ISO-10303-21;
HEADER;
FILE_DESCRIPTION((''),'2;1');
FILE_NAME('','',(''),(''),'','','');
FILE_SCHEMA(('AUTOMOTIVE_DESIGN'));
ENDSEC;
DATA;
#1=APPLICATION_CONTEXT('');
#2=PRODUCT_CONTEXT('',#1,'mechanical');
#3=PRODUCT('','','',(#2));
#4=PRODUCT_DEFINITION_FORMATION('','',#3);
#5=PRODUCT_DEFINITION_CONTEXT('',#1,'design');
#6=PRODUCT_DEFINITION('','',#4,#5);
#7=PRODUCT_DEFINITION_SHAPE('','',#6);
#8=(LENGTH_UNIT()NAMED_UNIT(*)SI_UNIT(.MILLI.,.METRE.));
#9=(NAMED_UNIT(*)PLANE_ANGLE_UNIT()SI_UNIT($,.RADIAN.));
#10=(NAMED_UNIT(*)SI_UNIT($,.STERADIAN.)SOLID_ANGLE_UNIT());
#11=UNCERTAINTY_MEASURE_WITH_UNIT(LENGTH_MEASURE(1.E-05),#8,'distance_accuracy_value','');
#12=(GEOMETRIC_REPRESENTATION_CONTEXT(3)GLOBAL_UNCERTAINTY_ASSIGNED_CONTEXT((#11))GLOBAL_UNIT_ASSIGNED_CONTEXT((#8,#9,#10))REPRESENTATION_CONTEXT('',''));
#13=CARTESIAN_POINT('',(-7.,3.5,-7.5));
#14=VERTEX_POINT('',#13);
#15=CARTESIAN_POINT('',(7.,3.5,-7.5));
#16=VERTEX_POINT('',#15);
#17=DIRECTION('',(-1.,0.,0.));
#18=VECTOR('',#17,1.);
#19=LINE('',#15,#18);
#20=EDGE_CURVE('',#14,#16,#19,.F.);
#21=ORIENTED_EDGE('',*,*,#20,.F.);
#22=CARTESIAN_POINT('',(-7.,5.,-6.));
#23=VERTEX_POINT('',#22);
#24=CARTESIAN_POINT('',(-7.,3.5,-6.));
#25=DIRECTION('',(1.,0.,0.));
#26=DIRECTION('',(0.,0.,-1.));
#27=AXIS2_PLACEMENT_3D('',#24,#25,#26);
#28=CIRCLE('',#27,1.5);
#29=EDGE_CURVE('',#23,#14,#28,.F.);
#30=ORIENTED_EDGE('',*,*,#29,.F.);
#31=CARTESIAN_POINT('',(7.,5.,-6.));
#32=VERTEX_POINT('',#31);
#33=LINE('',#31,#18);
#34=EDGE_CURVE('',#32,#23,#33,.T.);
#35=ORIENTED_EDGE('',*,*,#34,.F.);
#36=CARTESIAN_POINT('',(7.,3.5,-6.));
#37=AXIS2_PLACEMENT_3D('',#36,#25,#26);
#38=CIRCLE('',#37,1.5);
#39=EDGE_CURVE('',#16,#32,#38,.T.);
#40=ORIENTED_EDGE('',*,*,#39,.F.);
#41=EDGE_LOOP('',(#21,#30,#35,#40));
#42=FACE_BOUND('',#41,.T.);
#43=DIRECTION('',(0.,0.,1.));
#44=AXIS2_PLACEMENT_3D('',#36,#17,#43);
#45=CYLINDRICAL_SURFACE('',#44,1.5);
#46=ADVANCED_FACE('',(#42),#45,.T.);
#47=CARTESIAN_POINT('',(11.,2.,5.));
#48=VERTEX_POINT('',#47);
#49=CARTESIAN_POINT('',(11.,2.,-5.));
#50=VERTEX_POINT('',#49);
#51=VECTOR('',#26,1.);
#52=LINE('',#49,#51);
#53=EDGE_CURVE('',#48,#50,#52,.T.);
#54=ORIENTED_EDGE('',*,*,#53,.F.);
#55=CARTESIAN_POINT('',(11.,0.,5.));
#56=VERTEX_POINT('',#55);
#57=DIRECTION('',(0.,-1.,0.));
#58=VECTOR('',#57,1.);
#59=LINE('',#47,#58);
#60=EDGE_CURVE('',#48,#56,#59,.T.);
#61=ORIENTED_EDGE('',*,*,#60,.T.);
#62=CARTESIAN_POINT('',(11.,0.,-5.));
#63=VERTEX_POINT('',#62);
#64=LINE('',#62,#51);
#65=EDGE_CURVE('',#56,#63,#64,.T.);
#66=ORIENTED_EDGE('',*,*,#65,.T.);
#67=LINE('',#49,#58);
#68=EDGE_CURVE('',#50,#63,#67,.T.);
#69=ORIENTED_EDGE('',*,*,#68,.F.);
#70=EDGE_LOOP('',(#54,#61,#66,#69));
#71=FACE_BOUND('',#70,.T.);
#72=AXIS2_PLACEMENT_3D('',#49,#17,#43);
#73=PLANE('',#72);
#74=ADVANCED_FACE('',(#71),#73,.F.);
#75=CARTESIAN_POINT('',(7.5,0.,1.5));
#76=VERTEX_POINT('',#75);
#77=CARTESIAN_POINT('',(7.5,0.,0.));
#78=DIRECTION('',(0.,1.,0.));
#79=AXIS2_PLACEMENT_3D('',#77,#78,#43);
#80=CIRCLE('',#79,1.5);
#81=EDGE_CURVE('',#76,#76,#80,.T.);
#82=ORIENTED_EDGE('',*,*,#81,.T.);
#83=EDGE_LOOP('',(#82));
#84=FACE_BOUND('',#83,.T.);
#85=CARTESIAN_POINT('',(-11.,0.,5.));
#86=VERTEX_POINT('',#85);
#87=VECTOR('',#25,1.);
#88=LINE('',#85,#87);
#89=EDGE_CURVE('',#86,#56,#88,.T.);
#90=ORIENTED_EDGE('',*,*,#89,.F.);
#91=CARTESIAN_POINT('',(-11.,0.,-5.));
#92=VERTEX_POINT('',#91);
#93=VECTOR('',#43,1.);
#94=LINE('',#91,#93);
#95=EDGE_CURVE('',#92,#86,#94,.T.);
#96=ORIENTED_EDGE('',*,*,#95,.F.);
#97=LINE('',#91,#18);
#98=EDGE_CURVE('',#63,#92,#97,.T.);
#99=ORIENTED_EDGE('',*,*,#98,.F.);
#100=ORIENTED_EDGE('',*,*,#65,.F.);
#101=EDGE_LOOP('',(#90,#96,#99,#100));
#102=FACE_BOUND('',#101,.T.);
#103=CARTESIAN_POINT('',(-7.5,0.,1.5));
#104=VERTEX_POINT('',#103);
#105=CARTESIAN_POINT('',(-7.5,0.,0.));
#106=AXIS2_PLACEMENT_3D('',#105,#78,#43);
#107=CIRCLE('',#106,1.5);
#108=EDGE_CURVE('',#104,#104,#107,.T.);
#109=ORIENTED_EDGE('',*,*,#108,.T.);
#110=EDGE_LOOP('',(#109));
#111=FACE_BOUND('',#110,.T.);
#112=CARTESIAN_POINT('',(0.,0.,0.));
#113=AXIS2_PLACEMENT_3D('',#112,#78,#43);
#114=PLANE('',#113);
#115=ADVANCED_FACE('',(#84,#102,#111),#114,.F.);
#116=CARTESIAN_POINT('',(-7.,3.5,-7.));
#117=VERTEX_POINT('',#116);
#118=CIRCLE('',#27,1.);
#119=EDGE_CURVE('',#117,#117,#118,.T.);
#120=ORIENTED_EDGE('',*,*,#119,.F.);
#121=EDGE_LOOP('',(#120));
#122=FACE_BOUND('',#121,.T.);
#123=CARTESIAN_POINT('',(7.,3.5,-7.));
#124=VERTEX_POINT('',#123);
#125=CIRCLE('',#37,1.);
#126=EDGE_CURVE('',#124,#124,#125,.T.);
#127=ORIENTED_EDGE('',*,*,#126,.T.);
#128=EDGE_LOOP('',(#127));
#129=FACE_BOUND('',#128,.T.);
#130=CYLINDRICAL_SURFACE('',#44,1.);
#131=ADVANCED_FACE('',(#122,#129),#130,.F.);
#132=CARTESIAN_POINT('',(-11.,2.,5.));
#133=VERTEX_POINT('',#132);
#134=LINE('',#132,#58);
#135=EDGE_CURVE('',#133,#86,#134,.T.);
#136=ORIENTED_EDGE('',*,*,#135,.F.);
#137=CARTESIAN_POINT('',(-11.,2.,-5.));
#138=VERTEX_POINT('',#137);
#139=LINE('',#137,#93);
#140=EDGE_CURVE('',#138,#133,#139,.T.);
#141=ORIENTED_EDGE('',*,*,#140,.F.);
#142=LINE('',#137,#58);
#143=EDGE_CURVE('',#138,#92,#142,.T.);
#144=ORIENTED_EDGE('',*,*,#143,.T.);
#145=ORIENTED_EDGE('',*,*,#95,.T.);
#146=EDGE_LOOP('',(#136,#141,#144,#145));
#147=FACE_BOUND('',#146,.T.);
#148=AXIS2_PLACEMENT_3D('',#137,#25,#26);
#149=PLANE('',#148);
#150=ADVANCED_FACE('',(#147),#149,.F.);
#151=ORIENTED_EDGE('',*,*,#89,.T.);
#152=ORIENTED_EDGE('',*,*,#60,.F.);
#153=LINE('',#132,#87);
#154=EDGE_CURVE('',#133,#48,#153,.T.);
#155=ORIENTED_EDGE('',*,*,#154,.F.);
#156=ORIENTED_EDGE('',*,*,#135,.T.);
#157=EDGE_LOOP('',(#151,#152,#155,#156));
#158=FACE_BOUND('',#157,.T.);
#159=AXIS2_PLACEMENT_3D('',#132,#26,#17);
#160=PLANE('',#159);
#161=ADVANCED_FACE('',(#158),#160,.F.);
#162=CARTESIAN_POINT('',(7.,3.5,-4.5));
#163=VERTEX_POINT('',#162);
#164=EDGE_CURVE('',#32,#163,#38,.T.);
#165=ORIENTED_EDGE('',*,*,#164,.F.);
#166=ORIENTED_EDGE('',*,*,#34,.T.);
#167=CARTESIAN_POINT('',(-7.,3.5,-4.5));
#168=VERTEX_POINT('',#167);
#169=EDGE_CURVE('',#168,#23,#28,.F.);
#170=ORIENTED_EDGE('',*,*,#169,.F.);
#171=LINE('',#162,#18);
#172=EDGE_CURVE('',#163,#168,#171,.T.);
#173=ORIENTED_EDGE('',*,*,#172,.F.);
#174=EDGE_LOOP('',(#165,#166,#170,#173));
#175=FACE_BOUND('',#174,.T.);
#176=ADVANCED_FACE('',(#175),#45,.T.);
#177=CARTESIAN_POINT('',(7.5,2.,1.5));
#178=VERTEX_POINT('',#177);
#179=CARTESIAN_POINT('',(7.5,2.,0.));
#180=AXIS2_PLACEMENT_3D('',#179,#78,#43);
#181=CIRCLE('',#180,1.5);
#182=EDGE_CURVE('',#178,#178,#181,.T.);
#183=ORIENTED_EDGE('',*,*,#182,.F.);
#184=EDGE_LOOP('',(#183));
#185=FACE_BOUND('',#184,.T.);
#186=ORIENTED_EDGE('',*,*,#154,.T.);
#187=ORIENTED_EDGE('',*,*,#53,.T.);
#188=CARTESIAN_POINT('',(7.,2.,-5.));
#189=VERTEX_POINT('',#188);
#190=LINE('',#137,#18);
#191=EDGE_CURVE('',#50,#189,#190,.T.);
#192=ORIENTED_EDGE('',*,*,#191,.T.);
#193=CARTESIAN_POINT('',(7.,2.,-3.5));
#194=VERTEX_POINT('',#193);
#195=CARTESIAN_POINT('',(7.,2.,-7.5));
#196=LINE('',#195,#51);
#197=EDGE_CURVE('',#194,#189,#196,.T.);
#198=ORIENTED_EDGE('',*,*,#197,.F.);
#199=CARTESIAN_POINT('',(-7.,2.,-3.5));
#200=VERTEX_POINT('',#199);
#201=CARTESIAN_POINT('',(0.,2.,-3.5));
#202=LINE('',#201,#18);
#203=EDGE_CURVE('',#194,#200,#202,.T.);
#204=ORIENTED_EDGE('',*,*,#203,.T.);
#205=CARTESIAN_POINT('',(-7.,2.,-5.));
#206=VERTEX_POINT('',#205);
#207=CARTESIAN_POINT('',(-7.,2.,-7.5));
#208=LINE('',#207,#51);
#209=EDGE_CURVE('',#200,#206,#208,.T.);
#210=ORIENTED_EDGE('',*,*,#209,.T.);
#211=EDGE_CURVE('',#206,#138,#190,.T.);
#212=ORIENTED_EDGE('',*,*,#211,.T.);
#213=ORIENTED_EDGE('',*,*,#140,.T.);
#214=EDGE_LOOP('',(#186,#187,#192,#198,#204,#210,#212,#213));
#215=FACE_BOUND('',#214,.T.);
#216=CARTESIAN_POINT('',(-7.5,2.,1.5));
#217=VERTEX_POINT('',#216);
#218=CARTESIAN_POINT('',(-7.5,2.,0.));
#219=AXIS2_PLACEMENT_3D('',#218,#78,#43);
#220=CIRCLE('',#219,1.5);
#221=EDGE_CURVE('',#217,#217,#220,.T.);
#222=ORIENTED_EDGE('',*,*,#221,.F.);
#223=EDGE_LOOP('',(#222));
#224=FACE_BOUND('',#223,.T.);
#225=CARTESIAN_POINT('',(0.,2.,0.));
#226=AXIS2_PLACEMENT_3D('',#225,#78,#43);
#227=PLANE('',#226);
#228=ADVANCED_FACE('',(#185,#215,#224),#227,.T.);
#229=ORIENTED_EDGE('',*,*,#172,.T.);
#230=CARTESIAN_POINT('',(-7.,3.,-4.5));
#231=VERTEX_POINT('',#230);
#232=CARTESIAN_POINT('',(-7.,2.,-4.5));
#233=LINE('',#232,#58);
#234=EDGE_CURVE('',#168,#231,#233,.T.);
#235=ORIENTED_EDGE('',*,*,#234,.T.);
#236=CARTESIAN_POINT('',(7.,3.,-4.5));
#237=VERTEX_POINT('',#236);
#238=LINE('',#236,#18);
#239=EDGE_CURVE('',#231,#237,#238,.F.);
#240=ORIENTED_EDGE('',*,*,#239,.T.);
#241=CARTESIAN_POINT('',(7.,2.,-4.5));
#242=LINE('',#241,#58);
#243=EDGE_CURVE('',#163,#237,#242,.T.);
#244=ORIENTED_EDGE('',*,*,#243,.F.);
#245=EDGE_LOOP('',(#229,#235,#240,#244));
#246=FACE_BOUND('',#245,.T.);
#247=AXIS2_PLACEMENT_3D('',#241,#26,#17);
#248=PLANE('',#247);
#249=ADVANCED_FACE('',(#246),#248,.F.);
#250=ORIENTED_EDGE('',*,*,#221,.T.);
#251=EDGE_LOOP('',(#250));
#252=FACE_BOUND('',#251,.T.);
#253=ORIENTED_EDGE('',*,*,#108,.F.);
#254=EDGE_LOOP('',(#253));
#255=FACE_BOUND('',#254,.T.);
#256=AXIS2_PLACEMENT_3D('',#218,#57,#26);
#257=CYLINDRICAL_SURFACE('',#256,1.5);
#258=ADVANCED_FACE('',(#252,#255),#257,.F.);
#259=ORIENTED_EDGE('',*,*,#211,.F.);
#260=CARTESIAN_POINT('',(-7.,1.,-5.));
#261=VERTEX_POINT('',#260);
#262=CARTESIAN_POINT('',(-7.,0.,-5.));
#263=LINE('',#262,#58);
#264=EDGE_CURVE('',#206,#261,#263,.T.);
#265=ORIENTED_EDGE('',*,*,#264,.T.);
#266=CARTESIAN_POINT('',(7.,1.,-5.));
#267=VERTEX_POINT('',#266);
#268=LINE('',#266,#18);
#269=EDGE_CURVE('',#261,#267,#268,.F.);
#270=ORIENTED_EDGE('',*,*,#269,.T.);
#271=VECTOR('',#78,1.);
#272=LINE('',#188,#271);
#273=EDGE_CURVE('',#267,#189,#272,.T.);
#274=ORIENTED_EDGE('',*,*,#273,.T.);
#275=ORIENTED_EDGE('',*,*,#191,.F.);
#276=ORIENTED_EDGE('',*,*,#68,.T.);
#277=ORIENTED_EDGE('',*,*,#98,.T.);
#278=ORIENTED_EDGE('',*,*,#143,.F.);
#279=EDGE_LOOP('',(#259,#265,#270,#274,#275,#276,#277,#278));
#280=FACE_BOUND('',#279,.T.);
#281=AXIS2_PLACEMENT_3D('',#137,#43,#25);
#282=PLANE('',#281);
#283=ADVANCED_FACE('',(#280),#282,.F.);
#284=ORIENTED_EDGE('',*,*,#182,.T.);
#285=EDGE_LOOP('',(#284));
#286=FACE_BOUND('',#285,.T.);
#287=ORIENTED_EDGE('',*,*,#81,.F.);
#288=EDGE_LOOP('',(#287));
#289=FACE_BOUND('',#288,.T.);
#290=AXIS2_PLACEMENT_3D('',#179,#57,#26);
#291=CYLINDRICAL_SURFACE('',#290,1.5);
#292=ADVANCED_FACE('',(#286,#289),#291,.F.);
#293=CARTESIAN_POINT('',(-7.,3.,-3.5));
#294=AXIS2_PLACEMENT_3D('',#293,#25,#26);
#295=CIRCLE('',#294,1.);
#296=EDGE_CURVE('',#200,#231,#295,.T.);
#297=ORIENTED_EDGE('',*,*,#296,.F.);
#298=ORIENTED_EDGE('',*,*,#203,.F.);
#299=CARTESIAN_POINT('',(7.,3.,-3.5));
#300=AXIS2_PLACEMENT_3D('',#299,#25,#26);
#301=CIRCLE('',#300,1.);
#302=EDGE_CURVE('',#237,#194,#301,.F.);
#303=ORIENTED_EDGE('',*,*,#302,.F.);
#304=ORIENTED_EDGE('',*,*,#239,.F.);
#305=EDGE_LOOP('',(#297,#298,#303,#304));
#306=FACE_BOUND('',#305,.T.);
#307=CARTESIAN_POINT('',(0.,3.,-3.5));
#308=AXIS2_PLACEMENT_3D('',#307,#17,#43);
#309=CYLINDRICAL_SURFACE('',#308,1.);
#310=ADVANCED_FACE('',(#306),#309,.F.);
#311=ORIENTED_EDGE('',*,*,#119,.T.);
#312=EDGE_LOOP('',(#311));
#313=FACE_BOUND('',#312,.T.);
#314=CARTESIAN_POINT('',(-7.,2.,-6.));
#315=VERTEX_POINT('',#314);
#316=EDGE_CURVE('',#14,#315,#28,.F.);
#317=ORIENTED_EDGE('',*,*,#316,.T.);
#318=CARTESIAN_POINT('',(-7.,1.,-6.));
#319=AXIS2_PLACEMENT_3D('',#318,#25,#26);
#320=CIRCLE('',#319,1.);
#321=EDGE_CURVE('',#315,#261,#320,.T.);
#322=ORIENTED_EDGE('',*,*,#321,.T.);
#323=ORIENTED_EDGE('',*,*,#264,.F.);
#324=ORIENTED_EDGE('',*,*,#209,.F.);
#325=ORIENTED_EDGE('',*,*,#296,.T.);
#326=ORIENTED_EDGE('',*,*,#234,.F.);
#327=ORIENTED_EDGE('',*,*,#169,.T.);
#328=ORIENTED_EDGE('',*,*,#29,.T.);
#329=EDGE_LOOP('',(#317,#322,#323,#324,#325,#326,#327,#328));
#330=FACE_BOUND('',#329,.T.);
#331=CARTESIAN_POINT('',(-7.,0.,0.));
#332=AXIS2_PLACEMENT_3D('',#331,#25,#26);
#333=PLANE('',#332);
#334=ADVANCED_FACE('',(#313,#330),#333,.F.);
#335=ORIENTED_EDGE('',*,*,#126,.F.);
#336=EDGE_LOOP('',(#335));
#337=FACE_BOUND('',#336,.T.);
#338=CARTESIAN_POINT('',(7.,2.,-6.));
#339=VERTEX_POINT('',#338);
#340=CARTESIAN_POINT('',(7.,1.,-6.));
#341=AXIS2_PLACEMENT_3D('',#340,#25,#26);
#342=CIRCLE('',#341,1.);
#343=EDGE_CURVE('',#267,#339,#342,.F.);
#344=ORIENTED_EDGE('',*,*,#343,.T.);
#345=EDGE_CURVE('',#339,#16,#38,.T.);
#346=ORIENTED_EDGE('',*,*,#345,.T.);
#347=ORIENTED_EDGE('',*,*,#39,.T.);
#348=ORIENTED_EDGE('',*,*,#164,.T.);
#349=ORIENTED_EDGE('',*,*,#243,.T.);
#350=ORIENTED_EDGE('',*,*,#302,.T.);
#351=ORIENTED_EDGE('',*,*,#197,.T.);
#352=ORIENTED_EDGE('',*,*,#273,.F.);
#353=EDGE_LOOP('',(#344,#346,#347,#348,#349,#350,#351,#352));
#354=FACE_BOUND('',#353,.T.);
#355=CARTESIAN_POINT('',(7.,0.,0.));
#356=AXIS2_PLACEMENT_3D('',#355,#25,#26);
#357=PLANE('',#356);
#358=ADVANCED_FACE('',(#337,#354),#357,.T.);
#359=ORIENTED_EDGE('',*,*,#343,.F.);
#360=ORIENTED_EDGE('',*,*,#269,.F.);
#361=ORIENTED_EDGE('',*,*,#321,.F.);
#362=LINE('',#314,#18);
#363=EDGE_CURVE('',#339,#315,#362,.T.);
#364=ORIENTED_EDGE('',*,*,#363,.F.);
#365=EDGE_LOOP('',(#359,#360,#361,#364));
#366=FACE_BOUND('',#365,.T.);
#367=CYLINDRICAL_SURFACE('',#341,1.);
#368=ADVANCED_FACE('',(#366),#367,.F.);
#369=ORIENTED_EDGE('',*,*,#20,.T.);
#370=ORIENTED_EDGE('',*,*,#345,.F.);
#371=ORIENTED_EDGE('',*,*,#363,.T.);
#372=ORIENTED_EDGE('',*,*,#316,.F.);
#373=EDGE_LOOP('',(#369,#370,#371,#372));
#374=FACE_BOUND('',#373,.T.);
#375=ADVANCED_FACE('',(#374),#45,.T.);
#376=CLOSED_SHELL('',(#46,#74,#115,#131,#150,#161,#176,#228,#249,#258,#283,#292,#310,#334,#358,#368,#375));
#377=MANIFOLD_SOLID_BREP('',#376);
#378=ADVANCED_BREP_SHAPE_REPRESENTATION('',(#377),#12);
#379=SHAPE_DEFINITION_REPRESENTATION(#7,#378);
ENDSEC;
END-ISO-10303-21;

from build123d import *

# Parameters (mm, degrees)
SKETCH2_W           = 22
SKETCH2_H           = 10
SKETCH2_R           = 1.5
BOSS_EXTRUDE1_DEPTH = 2
SKETCH3_W           = 3
SKETCH3_H           = 3
SKETCH3_R           = 1
BOSS_EXTRUDE2_DEPTH = 7
FILLET1_R           = 1.5
FILLET2_R           = 1
FILLET3_R           = 1.5


with BuildPart() as part:
    # Sketch2 → Boss-Extrude1 (new body)
    with BuildSketch(Plane(origin=(0, 0, 0), x_dir=(1, 0, 0), z_dir=(0, 1, 0))):
        Rectangle(SKETCH2_W, SKETCH2_H)
        with Locations(Location((-7.5, 0, 0), (0, 0, 270))):
            Circle(SKETCH2_R, mode=Mode.SUBTRACT)
        with Locations(Location((7.5, 0, 0), (0, 0, 270))):
            Circle(SKETCH2_R, mode=Mode.SUBTRACT)
    extrude(amount=BOSS_EXTRUDE1_DEPTH)

    # Sketch3 → Boss-Extrude2 (add, symmetric)
    with BuildSketch(Plane(origin=(0, 0, 0), x_dir=(0, 0, -1), z_dir=(1, 0, 0))):
        with Locations((6, 3.5)):
            Rectangle(SKETCH3_W, SKETCH3_H)
        with Locations((6, 3.5)):
            Circle(SKETCH3_R, mode=Mode.SUBTRACT)
    extrude(amount=BOSS_EXTRUDE2_DEPTH, both=True)

    # Fillet1
    fillet1_edges = [part.edges().sort_by_distance(p)[0] for p in [
        (0, 5, -4.5),
        (0, 5, -7.5),
    ]]
    fillet(fillet1_edges, radius=FILLET1_R - 0.0001)  # a hair under: the kernel refuses the full size

    # Fillet2
    fillet2_edges = [part.edges().sort_by_distance(p)[0] for p in [
        (0, 2, -5),
        (0, 2, -4.5),
    ]]
    fillet(fillet2_edges, radius=FILLET2_R)

    # Fillet3
    fillet3_edges = [part.edges().sort_by_distance(p)[0] for p in [
        (0, 2, -7.5),
    ]]
    fillet(fillet3_edges, radius=FILLET3_R - 0.0001)  # a hair under: the kernel refuses the full size


solid = part.part
